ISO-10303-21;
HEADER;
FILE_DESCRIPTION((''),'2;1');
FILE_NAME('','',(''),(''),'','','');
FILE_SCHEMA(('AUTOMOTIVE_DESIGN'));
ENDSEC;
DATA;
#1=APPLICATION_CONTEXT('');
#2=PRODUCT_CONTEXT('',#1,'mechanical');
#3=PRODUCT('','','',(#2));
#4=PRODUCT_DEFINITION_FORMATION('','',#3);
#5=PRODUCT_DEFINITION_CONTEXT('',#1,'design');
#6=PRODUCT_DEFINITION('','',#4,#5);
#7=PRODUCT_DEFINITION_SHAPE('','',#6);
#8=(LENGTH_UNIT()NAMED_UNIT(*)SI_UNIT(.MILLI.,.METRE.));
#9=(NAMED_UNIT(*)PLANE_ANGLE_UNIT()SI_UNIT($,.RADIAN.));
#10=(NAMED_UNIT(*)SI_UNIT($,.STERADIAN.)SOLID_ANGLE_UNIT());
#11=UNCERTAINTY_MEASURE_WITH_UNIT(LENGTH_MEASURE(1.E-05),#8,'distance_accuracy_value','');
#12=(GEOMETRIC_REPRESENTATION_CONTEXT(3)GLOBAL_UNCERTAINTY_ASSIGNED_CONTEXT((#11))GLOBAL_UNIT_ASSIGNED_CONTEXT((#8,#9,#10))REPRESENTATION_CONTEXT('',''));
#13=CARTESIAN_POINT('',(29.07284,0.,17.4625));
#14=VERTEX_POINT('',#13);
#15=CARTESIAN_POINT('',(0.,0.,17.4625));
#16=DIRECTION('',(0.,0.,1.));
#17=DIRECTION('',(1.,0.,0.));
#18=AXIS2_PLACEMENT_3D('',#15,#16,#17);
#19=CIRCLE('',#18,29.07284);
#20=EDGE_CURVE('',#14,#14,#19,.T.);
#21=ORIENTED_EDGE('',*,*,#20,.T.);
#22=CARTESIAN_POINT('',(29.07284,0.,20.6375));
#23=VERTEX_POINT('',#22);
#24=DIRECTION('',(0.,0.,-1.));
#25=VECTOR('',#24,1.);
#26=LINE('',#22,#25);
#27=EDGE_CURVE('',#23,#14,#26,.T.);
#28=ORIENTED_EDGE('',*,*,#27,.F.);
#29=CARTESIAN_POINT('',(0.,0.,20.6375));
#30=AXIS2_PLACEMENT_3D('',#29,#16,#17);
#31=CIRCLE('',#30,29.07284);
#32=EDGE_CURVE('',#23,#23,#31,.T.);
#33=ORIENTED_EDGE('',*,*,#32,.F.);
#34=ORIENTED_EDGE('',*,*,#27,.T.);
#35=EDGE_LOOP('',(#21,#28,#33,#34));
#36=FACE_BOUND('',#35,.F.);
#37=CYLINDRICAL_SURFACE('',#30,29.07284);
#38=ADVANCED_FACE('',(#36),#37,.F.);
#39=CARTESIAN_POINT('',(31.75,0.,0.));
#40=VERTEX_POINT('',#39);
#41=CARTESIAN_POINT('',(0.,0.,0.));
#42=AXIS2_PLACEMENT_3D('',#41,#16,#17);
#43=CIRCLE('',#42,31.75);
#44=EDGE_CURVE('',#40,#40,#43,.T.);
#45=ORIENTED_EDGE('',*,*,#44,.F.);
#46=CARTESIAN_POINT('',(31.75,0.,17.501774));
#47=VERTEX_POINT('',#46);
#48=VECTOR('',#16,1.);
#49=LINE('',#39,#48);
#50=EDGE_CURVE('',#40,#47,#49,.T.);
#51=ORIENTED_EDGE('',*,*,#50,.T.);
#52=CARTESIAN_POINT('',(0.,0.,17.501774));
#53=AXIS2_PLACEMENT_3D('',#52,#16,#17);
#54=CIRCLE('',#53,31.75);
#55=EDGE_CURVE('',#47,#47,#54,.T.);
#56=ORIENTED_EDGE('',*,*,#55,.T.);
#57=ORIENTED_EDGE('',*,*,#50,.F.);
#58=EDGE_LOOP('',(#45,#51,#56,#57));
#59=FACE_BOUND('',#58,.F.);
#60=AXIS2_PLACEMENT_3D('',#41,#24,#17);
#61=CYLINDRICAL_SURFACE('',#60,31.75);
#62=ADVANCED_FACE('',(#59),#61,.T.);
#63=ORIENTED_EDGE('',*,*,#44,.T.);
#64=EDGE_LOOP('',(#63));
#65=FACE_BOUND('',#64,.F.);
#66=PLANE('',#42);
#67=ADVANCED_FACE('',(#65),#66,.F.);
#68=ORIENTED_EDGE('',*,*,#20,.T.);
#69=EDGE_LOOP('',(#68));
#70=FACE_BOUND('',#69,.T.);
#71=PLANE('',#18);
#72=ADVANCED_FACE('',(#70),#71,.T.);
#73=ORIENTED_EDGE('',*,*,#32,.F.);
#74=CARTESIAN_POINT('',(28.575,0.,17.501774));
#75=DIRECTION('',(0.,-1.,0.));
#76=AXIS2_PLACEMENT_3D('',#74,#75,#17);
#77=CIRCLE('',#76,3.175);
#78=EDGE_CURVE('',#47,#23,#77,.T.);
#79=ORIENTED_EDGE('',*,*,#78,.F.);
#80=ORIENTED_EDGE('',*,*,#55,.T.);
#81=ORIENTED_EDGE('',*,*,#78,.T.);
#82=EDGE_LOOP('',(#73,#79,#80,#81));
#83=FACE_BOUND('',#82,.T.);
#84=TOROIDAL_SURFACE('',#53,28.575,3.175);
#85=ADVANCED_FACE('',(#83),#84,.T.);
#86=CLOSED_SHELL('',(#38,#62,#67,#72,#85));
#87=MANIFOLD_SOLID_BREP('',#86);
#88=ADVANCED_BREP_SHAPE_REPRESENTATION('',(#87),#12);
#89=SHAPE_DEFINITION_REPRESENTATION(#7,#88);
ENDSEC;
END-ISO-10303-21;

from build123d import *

# Parameters (mm, degrees)
F0_R     = 31.75
F1_DEPTH = 20.6375
F2_R     = 29.07284
F3_DEPTH = 3.175


# Not quite as in the source:
# - a fillet or chamfer that OpenCascade refuses, or shapes differently, is made with other operations: its cross-section is extruded or revolved along the edge and cut away or added


with BuildPart() as f1:
    # F0 (on Top) → F1 (new body)
    with BuildSketch(Plane.XY):
        Circle(F0_R)
    extrude(amount=F1_DEPTH)

    # F2 (on face) → F3 (cut)
    with BuildSketch(Plane.XY.offset(20.6375)):
        Circle(F2_R)
    extrude(amount=-F3_DEPTH, mode=Mode.SUBTRACT)

    # F4: fillet of radius 3.175 on 1 edges, made by hand

    # F4_s1 → F4_t2 (revolve, cut)
    with BuildSketch(Plane.XZ):
        with BuildLine():
            ThreePointArc((31.75, 17.5017735556), (30.9896704744, 19.5633243068), (29.07284, 20.6375))
            Line((29.07284, 20.6375), (31.75, 20.6375))
            Line((31.75, 20.6375), (31.75, 17.5017735556))
        make_face()
    revolve(axis=Axis((0, 0, 20.6375), (0, 0, 1)), mode=Mode.SUBTRACT)


solid = f1.part
